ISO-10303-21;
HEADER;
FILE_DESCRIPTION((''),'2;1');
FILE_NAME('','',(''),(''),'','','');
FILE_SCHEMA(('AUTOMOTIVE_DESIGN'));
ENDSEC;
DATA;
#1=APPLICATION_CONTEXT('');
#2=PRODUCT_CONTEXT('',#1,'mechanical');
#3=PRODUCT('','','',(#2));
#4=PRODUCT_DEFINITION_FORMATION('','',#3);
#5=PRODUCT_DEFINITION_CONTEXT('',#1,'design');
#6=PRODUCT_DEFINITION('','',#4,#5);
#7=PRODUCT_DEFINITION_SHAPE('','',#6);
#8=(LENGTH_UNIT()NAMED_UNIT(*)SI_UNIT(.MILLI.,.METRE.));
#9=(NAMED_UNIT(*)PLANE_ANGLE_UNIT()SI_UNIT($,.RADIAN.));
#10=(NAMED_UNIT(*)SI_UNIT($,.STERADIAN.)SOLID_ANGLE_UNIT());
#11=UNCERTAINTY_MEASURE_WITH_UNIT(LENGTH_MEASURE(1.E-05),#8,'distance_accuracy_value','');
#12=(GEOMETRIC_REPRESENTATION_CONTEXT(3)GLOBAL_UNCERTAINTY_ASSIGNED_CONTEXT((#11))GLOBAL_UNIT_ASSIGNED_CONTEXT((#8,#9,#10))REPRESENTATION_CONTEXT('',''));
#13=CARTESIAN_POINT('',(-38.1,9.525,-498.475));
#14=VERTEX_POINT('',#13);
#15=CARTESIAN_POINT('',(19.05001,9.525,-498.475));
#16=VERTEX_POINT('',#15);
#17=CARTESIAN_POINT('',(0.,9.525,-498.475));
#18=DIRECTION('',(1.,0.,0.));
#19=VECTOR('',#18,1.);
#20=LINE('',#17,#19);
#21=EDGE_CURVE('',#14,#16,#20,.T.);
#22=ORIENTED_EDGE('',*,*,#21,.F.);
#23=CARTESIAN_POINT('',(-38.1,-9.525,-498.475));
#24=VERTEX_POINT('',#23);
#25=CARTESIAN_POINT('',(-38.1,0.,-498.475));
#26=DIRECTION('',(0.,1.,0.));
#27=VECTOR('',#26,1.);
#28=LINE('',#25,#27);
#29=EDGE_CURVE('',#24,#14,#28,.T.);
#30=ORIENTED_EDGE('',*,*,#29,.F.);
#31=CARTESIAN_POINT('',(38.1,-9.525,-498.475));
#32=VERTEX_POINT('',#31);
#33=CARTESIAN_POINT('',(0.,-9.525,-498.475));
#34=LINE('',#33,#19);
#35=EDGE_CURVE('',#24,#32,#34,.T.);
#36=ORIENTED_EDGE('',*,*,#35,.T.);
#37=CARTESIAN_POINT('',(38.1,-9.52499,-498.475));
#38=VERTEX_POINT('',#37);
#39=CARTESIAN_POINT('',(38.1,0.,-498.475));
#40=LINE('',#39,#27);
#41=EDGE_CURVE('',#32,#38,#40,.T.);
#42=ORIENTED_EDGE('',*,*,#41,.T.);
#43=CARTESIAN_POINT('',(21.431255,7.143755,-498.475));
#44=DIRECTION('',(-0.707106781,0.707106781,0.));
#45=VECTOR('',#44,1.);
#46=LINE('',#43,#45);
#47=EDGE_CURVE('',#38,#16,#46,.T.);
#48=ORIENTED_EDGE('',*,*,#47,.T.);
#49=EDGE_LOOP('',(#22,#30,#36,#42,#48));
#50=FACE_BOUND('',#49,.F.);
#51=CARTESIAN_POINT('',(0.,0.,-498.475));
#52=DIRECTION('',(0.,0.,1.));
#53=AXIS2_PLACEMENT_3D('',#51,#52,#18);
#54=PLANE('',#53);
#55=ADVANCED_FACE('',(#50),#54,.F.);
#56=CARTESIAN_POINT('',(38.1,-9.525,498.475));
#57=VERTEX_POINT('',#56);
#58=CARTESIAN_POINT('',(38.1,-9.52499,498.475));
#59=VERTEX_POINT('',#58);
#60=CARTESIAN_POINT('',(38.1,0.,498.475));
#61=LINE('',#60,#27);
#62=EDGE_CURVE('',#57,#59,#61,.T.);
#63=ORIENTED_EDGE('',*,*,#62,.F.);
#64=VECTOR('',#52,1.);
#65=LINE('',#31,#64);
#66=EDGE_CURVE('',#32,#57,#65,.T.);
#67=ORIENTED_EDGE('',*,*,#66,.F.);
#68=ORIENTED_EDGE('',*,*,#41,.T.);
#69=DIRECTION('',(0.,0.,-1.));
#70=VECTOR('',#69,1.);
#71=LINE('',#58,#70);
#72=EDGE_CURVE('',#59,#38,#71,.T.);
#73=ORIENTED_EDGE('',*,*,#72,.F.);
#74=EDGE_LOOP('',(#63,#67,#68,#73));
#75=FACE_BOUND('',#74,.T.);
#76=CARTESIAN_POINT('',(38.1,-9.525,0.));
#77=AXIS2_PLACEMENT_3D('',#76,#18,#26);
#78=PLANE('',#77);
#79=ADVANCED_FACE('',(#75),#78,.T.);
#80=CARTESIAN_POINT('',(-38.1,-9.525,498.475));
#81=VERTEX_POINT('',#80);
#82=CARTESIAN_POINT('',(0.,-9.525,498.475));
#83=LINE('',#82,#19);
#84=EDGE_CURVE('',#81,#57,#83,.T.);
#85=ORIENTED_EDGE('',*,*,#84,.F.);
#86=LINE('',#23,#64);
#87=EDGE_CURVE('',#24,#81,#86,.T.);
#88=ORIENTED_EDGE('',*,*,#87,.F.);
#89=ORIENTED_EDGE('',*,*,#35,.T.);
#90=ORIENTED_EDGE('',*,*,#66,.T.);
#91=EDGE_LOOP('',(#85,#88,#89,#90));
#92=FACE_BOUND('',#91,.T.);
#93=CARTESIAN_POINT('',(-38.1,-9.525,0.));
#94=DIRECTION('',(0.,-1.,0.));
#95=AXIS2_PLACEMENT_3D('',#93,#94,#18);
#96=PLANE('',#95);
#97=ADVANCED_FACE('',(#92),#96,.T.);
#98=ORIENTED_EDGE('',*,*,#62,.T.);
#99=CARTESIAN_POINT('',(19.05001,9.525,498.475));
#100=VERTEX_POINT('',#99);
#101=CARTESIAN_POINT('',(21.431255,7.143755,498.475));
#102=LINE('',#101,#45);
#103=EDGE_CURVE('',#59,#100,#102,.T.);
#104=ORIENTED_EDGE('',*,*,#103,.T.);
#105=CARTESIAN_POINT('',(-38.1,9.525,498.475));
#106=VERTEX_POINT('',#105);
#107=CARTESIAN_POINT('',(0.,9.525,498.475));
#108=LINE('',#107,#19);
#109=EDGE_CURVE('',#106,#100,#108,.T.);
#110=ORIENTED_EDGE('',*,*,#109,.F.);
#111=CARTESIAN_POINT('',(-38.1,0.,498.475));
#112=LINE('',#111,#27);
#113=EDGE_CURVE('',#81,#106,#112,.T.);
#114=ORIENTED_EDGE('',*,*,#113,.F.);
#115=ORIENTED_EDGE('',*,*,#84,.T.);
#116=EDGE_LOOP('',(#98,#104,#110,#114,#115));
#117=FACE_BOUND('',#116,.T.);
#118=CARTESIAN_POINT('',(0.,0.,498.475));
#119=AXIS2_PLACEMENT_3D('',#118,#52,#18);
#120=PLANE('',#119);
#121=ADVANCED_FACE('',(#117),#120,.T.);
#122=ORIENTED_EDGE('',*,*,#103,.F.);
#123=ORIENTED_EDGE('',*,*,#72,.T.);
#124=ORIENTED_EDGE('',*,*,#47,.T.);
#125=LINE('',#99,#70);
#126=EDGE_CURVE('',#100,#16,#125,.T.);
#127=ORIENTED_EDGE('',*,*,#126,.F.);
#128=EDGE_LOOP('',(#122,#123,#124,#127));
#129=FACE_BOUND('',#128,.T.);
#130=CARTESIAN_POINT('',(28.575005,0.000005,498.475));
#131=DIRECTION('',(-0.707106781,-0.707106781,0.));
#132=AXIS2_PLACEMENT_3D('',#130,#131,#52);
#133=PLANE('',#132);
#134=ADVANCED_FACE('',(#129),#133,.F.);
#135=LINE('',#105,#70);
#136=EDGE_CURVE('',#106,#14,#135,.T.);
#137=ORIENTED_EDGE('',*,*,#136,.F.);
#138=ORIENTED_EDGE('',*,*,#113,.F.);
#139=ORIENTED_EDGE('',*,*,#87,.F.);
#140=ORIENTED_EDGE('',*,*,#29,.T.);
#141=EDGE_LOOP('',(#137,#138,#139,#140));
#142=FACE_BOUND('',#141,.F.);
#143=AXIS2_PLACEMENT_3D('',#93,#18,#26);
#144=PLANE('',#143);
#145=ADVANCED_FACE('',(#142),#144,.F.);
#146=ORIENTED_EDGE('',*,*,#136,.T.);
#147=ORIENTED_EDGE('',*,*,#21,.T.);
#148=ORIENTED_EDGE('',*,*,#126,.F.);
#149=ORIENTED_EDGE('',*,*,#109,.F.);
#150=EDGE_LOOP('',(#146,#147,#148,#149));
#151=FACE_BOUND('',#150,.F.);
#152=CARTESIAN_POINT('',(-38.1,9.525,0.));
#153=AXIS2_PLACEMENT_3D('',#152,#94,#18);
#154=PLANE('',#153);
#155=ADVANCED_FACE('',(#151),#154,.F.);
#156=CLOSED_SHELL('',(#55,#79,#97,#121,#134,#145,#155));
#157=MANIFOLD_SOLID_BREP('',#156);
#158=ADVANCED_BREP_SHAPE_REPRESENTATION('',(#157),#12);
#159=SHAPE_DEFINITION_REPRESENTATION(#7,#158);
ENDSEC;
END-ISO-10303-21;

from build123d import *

# Parameters (mm, degrees)
F0_W     = 76.2
F0_H     = 19.05
F1_DEPTH = 498.475
F2_SIZE2 = 19.04999
F2_SIZE  = 19.04999


# Not quite as in the source:
# - a fillet or chamfer is up to 0.001 mm smaller than in the source, because OpenCascade refuses the exact size


with BuildPart() as f1:
    # F0 (on Top) → F1 (new body, symmetric)
    with BuildSketch(Plane.XY):
        Rectangle(F0_W, F0_H)
    extrude(amount=F1_DEPTH, both=True)

    # F2 (size 19.05 and 19.05 in the source; OpenCascade refuses exactly that, so slightly less here)
    f2_edges = [f1.edges().sort_by_distance(p)[0] for p in [
        (38.1, 9.525, 0),
    ]]
    chamfer(f2_edges, length=F2_SIZE, length2=F2_SIZE2)


solid = f1.part
